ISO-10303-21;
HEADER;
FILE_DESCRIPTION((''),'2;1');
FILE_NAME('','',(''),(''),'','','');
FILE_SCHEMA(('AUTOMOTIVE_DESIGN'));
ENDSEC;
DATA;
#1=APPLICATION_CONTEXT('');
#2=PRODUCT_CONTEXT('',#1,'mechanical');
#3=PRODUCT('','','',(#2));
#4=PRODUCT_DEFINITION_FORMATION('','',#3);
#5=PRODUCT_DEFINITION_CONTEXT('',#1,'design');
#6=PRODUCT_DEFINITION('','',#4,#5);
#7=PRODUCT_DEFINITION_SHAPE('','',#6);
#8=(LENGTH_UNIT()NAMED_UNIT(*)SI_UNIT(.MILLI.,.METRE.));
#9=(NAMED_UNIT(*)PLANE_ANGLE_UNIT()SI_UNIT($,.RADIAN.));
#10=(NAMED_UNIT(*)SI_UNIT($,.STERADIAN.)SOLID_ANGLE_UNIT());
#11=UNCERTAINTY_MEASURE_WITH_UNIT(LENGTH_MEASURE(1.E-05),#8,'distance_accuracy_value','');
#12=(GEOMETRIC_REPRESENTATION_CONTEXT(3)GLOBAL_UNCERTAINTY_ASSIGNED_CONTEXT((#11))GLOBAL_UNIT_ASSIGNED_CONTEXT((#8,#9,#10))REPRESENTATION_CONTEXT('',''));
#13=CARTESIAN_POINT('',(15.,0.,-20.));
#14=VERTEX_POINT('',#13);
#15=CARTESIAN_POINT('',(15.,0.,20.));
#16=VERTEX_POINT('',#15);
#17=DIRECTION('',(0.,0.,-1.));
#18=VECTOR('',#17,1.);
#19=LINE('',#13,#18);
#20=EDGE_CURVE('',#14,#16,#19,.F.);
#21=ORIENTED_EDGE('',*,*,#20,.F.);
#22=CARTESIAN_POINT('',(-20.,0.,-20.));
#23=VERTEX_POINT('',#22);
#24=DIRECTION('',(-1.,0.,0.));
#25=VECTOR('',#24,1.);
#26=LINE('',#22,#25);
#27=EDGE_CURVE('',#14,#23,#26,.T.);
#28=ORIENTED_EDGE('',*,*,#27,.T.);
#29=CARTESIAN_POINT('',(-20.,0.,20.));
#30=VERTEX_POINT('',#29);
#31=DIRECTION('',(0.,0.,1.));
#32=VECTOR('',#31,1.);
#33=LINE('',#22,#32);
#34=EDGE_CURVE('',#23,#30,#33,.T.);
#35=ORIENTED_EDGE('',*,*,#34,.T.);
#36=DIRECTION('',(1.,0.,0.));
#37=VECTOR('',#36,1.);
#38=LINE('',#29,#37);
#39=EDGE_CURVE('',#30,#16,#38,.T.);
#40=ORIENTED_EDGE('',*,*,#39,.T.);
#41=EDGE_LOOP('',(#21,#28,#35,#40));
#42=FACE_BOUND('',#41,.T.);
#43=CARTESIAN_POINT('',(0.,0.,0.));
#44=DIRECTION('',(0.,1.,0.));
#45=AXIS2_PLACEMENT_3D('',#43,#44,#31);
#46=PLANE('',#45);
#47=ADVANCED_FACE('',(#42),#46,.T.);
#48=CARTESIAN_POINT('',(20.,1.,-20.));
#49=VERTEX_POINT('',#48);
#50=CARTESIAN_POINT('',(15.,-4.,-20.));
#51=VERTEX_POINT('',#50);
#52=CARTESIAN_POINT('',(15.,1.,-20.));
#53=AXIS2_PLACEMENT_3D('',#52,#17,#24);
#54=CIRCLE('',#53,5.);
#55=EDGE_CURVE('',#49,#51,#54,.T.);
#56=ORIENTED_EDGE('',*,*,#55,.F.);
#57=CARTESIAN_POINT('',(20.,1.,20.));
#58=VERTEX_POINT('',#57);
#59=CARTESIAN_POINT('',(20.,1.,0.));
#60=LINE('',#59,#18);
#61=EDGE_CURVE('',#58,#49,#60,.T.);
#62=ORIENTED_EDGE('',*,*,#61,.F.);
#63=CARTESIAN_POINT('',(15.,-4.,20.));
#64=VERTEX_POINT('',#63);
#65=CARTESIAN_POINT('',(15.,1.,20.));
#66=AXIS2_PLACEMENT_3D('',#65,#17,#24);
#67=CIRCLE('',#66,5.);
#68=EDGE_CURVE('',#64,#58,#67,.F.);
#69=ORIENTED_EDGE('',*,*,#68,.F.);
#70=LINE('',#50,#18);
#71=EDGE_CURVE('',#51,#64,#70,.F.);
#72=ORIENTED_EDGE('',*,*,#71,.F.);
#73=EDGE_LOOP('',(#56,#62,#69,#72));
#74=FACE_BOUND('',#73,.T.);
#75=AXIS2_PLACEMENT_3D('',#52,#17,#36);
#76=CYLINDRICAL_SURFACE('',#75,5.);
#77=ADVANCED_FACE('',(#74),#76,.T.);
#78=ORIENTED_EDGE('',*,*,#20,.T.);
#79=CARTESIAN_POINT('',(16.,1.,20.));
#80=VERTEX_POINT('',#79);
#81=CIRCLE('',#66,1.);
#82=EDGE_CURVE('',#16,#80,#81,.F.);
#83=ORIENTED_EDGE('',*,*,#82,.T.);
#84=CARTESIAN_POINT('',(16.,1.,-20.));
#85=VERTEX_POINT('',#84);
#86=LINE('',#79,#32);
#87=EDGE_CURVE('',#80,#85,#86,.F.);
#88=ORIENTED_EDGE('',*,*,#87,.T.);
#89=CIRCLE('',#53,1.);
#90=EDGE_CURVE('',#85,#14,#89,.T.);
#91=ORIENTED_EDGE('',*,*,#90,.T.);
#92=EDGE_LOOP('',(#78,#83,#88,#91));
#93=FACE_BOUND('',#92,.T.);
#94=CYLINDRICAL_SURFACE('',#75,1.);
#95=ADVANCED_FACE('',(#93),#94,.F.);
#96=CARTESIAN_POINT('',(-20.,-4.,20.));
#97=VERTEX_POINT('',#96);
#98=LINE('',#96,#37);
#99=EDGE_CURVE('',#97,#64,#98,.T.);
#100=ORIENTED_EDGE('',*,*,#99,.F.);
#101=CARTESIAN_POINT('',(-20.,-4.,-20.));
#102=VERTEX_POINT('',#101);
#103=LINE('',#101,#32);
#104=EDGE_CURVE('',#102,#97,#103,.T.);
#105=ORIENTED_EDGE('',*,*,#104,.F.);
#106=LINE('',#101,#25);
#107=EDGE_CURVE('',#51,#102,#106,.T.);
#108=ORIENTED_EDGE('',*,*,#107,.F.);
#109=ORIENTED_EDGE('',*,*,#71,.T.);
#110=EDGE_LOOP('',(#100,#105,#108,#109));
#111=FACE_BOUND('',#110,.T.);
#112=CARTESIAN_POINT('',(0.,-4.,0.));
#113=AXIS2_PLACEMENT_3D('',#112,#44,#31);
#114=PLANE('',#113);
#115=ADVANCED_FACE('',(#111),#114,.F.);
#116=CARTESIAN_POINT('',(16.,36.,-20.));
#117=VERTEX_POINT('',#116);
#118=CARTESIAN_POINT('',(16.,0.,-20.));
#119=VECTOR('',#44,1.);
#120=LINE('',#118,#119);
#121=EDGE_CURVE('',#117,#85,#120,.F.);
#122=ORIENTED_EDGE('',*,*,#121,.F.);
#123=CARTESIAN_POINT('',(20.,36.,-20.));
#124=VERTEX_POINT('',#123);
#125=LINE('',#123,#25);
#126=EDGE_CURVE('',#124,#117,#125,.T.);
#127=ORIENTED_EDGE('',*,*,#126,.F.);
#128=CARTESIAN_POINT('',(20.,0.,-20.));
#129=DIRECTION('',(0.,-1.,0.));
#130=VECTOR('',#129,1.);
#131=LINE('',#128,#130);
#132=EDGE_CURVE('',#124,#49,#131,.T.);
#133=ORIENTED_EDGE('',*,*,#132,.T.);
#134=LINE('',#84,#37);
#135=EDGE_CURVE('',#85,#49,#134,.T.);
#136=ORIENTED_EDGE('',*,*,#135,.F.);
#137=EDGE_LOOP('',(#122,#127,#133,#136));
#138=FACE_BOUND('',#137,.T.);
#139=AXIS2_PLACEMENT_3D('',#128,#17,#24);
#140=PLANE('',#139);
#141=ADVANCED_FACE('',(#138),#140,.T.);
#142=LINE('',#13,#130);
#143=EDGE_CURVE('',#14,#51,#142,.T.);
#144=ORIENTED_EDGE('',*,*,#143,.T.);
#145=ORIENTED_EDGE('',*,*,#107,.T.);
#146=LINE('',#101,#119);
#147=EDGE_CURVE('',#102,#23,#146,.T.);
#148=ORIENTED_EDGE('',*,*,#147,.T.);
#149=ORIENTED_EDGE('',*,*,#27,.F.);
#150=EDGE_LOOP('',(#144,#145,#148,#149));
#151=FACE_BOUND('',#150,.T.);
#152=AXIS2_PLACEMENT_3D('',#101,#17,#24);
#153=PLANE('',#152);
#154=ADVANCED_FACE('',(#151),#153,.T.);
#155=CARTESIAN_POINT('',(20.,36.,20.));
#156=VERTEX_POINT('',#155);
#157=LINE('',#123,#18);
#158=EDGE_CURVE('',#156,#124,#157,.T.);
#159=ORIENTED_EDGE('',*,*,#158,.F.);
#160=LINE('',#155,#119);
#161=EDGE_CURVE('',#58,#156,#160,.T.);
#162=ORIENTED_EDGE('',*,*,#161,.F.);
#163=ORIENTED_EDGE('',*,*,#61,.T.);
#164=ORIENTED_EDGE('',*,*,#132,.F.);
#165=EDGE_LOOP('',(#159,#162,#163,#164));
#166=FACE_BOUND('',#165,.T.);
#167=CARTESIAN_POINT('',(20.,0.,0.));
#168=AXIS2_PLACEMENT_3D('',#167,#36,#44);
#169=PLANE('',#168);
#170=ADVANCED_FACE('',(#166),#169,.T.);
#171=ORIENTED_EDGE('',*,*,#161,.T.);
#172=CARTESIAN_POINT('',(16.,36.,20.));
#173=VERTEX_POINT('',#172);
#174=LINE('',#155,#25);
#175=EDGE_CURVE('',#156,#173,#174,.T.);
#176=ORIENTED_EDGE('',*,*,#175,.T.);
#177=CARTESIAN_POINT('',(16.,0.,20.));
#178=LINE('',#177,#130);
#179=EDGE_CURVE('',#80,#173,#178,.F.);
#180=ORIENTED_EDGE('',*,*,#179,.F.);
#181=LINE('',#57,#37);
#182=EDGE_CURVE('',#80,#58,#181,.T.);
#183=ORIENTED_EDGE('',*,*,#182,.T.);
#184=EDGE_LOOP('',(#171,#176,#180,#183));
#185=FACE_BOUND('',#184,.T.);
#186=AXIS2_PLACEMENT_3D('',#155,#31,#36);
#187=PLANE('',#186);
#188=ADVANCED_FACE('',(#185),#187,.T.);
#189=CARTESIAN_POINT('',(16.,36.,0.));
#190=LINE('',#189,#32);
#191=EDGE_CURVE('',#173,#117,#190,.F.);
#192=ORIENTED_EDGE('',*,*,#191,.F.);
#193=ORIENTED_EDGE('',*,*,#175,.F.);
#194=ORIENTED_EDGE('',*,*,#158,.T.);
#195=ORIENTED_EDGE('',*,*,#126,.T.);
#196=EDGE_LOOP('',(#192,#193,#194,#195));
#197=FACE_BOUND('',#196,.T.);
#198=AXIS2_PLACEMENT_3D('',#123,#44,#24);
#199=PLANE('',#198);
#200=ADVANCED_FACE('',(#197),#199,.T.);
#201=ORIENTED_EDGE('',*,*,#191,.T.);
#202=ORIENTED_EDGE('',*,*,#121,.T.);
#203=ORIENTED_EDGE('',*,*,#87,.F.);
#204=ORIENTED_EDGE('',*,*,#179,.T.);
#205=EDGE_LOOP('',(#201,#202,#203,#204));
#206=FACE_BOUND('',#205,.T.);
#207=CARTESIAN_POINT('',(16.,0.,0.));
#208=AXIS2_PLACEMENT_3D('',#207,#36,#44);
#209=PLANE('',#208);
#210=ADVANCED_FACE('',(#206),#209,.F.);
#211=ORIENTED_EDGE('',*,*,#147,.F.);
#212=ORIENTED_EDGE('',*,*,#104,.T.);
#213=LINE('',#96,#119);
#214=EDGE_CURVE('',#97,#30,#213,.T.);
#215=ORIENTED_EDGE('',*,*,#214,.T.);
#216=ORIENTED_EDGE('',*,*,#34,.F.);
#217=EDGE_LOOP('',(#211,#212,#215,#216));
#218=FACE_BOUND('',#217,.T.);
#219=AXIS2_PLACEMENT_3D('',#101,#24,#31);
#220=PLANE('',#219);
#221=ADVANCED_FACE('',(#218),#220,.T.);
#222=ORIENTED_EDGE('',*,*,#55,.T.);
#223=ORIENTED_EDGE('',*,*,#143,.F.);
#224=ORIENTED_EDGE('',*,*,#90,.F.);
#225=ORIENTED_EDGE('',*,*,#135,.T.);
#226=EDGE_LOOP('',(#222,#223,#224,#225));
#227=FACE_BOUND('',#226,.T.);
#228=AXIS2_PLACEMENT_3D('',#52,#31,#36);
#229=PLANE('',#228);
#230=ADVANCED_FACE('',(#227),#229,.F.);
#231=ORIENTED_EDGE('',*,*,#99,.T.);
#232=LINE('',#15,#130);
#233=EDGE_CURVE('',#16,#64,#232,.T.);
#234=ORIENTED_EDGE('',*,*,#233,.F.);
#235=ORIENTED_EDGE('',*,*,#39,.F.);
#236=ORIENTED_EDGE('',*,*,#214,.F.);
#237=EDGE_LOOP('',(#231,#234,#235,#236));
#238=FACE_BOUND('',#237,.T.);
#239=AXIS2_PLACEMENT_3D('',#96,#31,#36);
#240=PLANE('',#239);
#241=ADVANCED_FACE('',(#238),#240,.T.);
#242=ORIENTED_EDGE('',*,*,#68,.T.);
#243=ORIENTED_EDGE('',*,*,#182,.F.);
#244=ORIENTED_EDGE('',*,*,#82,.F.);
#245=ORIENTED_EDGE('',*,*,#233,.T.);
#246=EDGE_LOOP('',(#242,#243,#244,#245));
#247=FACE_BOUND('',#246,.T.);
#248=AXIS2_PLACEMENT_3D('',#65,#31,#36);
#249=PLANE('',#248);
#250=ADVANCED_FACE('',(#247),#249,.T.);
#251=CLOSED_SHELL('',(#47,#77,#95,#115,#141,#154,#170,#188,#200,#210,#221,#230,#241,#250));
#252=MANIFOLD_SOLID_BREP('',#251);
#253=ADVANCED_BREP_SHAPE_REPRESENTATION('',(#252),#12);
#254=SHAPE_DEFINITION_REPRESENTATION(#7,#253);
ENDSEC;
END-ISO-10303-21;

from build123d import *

# Parameters (mm, degrees)
SKETCH1_W                    = 40
SKETCH1_H                    = 40
BASE_FLANGE1_DEPTH           = 4
EDGE_FLANGE1_STRIP_W         = 18
EDGE_FLANGE1_STRIP_H         = 4
EDGE_FLANGE1_STRIP_CUT_DEPTH = 40
EDGE_FLANGE1_DEPTH           = 40


# Sheet-metal steps are written as plain solids
with BuildPart() as part:
    # Sketch1 → Base-Flange1 (new body)
    with BuildSketch(Plane(origin=(0, 0, 0), x_dir=(1, 0, 0), z_dir=(0, 1, 0))):
        Rectangle(SKETCH1_W, SKETCH1_H)
    extrude(amount=-BASE_FLANGE1_DEPTH)

    # Edge-Flange1 strip (across the edge) → Edge-Flange1 strip cut (cut)
    with BuildSketch(Plane(origin=(20, 0, 20), x_dir=(-1, 0, 0), z_dir=(0, 0, -1))):
        with Locations((-4, -2)):
            Rectangle(EDGE_FLANGE1_STRIP_W, EDGE_FLANGE1_STRIP_H)
    extrude(amount=EDGE_FLANGE1_STRIP_CUT_DEPTH, mode=Mode.SUBTRACT)

    # Edge-Flange1 section (across the edge) → Edge-Flange1 (add)
    with BuildSketch(Plane(origin=(20, 0, 20), x_dir=(-1, 0, 0), z_dir=(0, 0, -1))):
        with BuildLine():
            Line((0, 1), (0, 36))
            Line((0, 36), (4, 36))
            Line((4, 36), (4, 1))
            ThreePointArc((4, 1), (4.292893219, 0.292893219), (5, 0))
            Line((5, 0), (5, -4))
            ThreePointArc((5, -4), (1.464466094, -2.535533906), (0, 1))
        make_face()
    extrude(amount=EDGE_FLANGE1_DEPTH)


solid = part.part
